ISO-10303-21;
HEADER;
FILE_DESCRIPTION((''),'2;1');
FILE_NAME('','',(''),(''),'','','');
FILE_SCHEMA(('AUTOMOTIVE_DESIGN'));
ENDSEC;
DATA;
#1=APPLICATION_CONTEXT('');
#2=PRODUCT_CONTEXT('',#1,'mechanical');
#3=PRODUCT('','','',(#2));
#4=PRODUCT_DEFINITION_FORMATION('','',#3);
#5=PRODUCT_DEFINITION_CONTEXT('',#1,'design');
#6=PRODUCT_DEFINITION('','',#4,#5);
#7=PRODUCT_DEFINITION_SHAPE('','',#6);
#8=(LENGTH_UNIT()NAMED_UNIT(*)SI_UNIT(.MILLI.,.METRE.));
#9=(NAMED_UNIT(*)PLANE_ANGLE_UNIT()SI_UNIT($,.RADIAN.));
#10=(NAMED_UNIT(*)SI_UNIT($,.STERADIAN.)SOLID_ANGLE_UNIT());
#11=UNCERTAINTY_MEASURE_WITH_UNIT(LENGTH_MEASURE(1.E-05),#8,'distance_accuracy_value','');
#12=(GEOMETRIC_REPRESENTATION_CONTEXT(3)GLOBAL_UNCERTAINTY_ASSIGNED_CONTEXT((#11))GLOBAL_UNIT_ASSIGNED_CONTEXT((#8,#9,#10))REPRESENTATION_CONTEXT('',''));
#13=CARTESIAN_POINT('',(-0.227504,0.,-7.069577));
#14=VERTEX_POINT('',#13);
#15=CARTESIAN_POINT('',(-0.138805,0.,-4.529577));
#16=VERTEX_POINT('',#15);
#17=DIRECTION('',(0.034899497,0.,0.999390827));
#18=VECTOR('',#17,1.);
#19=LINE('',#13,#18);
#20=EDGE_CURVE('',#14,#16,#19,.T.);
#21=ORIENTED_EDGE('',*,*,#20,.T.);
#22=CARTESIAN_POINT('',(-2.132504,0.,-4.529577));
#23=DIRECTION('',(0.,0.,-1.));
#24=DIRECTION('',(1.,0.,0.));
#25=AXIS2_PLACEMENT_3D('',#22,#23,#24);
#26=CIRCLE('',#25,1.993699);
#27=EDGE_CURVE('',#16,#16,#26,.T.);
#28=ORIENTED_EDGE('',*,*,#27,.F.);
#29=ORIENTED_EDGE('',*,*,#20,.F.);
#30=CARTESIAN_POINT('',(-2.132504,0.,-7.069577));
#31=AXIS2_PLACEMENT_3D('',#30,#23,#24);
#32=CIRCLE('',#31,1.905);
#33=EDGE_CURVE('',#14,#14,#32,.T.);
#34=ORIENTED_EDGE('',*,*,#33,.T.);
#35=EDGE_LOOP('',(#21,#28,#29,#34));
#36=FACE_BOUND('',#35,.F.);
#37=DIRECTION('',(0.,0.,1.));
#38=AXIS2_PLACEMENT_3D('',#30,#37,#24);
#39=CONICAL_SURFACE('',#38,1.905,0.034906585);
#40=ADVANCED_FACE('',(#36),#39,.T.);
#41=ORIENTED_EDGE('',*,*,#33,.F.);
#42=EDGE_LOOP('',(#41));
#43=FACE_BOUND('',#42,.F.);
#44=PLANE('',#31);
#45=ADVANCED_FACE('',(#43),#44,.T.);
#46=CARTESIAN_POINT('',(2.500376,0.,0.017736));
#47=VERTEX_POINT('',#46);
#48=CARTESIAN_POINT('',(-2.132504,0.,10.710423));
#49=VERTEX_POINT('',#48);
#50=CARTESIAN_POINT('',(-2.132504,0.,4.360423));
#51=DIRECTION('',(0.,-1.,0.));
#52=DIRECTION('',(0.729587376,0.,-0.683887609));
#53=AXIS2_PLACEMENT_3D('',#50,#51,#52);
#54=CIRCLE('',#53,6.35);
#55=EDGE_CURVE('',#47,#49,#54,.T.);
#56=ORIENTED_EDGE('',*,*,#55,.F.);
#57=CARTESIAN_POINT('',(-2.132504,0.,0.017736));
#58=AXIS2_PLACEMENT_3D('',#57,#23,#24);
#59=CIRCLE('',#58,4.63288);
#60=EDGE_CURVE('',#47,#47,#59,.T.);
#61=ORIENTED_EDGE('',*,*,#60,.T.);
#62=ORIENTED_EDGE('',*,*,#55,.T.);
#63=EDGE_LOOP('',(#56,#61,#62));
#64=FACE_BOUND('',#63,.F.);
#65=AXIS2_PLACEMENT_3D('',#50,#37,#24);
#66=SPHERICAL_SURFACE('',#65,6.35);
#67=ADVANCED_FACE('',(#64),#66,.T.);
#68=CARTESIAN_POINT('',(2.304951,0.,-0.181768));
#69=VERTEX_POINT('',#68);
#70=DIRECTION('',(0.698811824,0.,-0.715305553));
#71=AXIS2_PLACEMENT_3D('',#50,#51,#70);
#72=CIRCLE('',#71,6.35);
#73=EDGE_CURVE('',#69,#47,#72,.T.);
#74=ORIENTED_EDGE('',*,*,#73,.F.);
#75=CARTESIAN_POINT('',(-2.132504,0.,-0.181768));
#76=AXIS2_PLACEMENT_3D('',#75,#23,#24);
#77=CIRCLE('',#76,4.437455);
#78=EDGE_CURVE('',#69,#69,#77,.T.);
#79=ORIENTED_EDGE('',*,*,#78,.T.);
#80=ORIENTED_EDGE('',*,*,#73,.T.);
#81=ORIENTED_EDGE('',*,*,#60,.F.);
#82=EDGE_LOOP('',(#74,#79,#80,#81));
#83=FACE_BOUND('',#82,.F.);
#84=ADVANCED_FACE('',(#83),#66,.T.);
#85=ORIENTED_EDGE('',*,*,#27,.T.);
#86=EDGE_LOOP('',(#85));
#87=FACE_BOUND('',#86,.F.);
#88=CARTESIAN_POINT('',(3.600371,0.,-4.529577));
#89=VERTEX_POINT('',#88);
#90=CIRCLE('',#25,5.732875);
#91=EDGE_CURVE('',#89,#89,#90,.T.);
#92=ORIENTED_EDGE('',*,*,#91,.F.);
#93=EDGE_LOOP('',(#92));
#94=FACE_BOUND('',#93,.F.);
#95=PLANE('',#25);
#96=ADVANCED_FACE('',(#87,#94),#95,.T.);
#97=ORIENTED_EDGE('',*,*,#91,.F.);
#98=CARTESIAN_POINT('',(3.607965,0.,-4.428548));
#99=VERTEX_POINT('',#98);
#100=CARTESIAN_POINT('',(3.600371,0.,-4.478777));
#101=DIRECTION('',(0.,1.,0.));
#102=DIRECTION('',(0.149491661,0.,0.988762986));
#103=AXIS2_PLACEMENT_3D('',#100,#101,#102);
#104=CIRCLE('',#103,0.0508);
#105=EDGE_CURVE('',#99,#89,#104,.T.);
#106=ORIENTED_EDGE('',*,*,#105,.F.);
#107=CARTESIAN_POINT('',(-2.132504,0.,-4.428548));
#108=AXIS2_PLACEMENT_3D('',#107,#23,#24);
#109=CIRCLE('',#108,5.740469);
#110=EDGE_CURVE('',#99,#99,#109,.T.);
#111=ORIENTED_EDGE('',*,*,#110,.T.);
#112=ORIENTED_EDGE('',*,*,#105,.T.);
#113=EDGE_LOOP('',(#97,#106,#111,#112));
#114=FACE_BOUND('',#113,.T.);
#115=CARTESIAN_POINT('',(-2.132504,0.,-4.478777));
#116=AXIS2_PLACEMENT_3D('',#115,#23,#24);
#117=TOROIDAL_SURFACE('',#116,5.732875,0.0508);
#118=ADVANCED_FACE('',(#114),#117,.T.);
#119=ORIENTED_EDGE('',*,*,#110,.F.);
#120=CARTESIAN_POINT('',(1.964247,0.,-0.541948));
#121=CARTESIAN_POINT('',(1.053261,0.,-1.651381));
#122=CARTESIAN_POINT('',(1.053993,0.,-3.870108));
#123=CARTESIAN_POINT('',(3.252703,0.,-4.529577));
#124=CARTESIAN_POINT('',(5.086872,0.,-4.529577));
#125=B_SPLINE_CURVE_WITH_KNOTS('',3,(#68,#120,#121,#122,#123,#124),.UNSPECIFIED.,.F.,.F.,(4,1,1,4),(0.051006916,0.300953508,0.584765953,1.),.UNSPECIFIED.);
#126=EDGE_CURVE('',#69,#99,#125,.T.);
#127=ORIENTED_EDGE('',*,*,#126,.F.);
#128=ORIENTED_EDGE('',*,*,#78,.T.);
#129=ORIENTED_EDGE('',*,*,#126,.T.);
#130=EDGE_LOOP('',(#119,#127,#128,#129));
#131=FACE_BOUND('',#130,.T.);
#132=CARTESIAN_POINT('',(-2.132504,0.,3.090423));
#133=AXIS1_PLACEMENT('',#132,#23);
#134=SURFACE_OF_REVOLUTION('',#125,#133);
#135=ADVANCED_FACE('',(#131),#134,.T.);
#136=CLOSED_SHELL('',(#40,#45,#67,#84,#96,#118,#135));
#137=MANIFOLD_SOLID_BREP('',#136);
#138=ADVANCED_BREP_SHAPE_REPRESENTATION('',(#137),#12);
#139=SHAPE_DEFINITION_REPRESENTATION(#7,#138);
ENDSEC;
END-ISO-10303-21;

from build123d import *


# Not quite as in the source:
# - a fillet or chamfer that OpenCascade refuses, or shapes differently, is made with other operations: its cross-section is extruded or revolved along the edge and cut away or added


with BuildPart() as f1:
    # F0 (on Front) → F1 (revolve)
    with BuildSketch(Plane.XZ):
        with BuildLine():
            add(Edge.make_bspline(
                [(2.5003758306, 0.0177362721), (2.4404300279, -0.0413985663), (2.3744789771, -0.1082652449), (2.3049510778, -0.1817676763)],
                knots=[0, 0, 0, 0, 0.0510069156, 0.0510069156, 0.0510069156, 0.0510069156], degree=3))
            ThreePointArc((2.5003758306, 0.0177362721), (3.6940969816, 6.8849464932), (-2.1325040052, 10.7104225876))
            Line((-2.1325040052, 10.7104225876), (-2.132504005, -1.9895774124))
            ThreePointArc((-2.132504005, -1.9895774124), (0.2632831128, -1.5202835001), (2.3049510778, -0.1817676763))
        make_face()
        with BuildLine():
            ThreePointArc((2.3049510778, -0.1817676763), (2.4037603545, -0.0830901744), (2.5003758306, 0.0177362721))
            add(Edge.make_bspline(
                [(2.5003758306, 0.0177362721), (2.4404300279, -0.0413985663), (2.3744789771, -0.1082652449), (2.3049510778, -0.1817676763)],
                knots=[0, 0, 0, 0, 0.0510069156, 0.0510069156, 0.0510069156, 0.0510069156], degree=3))
        make_face()
        with BuildLine():
            add(Edge.make_bspline(
                [(2.3049510778, -0.1817676763), (1.9642470512, -0.5419479004), (1.0532611933, -1.6513807021), (1.0539929138, -3.8701076312), (3.2527025422, -4.5295774125), (5.0868722728, -4.5295774125)],
                knots=[0.0510069156, 0.0510069156, 0.0510069156, 0.0510069156, 0.300953508, 0.5847659526, 1, 1, 1, 1], degree=3))
            ThreePointArc((2.3049510778, -0.1817676763), (0.2632831128, -1.5202835001), (-2.132504005, -1.9895774124))
            Line((-2.132504005, -1.9895774124), (-2.1325040049, -4.5295774124))
            Line((-2.1325040049, -4.5295774124), (-0.2275040048, -4.5295774124))
            Line((-0.2275040048, -4.5295774124), (-0.1388052504, -4.5295774124))
            Line((-0.1388052504, -4.5295774124), (5.0868722728, -4.5295774125))
        make_face()
        Polygon((-0.2275040048, -4.5295774124), (-2.1325040049, -4.5295774124), (-2.1325040049, -7.0695774124), (-0.2275040049, -7.0695774124), (-0.1388052504, -4.5295774124), align=None)
    revolve(axis=Axis((-2.132504005, 0, 3.0904225876), (0, 0, -1)))

    # F2: fillet of radius 0.0508 on 1 edges, made by hand

    # F2_s1 → F2_t2 (revolve, cut)
    with BuildSketch(Plane.XZ):
        with BuildLine():
            ThreePointArc((3.6079651255, -4.4285482526), (3.651028038, -4.4825852127), (3.6003709491, -4.5295774123))
            Line((3.6003709491, -4.5295774123), (3.6003709491, -4.5305934123))
            Line((3.6003709491, -4.5305934123), (5.0868722728, -4.5305934125))
            Line((5.0868722728, -4.5305934125), (5.0868722728, -4.5285614125))
            ThreePointArc((5.0868722728, -4.5285614125), (4.3457025483, -4.5054914795), (3.6081170091, -4.4275436694))
            Line((3.6081170091, -4.4275436694), (3.6079651255, -4.4285482526))
        make_face()
    revolve(axis=Axis((-2.1325040049, 0, -4.5295774126), (0, 0, -1)), mode=Mode.SUBTRACT)


solid = f1.part
